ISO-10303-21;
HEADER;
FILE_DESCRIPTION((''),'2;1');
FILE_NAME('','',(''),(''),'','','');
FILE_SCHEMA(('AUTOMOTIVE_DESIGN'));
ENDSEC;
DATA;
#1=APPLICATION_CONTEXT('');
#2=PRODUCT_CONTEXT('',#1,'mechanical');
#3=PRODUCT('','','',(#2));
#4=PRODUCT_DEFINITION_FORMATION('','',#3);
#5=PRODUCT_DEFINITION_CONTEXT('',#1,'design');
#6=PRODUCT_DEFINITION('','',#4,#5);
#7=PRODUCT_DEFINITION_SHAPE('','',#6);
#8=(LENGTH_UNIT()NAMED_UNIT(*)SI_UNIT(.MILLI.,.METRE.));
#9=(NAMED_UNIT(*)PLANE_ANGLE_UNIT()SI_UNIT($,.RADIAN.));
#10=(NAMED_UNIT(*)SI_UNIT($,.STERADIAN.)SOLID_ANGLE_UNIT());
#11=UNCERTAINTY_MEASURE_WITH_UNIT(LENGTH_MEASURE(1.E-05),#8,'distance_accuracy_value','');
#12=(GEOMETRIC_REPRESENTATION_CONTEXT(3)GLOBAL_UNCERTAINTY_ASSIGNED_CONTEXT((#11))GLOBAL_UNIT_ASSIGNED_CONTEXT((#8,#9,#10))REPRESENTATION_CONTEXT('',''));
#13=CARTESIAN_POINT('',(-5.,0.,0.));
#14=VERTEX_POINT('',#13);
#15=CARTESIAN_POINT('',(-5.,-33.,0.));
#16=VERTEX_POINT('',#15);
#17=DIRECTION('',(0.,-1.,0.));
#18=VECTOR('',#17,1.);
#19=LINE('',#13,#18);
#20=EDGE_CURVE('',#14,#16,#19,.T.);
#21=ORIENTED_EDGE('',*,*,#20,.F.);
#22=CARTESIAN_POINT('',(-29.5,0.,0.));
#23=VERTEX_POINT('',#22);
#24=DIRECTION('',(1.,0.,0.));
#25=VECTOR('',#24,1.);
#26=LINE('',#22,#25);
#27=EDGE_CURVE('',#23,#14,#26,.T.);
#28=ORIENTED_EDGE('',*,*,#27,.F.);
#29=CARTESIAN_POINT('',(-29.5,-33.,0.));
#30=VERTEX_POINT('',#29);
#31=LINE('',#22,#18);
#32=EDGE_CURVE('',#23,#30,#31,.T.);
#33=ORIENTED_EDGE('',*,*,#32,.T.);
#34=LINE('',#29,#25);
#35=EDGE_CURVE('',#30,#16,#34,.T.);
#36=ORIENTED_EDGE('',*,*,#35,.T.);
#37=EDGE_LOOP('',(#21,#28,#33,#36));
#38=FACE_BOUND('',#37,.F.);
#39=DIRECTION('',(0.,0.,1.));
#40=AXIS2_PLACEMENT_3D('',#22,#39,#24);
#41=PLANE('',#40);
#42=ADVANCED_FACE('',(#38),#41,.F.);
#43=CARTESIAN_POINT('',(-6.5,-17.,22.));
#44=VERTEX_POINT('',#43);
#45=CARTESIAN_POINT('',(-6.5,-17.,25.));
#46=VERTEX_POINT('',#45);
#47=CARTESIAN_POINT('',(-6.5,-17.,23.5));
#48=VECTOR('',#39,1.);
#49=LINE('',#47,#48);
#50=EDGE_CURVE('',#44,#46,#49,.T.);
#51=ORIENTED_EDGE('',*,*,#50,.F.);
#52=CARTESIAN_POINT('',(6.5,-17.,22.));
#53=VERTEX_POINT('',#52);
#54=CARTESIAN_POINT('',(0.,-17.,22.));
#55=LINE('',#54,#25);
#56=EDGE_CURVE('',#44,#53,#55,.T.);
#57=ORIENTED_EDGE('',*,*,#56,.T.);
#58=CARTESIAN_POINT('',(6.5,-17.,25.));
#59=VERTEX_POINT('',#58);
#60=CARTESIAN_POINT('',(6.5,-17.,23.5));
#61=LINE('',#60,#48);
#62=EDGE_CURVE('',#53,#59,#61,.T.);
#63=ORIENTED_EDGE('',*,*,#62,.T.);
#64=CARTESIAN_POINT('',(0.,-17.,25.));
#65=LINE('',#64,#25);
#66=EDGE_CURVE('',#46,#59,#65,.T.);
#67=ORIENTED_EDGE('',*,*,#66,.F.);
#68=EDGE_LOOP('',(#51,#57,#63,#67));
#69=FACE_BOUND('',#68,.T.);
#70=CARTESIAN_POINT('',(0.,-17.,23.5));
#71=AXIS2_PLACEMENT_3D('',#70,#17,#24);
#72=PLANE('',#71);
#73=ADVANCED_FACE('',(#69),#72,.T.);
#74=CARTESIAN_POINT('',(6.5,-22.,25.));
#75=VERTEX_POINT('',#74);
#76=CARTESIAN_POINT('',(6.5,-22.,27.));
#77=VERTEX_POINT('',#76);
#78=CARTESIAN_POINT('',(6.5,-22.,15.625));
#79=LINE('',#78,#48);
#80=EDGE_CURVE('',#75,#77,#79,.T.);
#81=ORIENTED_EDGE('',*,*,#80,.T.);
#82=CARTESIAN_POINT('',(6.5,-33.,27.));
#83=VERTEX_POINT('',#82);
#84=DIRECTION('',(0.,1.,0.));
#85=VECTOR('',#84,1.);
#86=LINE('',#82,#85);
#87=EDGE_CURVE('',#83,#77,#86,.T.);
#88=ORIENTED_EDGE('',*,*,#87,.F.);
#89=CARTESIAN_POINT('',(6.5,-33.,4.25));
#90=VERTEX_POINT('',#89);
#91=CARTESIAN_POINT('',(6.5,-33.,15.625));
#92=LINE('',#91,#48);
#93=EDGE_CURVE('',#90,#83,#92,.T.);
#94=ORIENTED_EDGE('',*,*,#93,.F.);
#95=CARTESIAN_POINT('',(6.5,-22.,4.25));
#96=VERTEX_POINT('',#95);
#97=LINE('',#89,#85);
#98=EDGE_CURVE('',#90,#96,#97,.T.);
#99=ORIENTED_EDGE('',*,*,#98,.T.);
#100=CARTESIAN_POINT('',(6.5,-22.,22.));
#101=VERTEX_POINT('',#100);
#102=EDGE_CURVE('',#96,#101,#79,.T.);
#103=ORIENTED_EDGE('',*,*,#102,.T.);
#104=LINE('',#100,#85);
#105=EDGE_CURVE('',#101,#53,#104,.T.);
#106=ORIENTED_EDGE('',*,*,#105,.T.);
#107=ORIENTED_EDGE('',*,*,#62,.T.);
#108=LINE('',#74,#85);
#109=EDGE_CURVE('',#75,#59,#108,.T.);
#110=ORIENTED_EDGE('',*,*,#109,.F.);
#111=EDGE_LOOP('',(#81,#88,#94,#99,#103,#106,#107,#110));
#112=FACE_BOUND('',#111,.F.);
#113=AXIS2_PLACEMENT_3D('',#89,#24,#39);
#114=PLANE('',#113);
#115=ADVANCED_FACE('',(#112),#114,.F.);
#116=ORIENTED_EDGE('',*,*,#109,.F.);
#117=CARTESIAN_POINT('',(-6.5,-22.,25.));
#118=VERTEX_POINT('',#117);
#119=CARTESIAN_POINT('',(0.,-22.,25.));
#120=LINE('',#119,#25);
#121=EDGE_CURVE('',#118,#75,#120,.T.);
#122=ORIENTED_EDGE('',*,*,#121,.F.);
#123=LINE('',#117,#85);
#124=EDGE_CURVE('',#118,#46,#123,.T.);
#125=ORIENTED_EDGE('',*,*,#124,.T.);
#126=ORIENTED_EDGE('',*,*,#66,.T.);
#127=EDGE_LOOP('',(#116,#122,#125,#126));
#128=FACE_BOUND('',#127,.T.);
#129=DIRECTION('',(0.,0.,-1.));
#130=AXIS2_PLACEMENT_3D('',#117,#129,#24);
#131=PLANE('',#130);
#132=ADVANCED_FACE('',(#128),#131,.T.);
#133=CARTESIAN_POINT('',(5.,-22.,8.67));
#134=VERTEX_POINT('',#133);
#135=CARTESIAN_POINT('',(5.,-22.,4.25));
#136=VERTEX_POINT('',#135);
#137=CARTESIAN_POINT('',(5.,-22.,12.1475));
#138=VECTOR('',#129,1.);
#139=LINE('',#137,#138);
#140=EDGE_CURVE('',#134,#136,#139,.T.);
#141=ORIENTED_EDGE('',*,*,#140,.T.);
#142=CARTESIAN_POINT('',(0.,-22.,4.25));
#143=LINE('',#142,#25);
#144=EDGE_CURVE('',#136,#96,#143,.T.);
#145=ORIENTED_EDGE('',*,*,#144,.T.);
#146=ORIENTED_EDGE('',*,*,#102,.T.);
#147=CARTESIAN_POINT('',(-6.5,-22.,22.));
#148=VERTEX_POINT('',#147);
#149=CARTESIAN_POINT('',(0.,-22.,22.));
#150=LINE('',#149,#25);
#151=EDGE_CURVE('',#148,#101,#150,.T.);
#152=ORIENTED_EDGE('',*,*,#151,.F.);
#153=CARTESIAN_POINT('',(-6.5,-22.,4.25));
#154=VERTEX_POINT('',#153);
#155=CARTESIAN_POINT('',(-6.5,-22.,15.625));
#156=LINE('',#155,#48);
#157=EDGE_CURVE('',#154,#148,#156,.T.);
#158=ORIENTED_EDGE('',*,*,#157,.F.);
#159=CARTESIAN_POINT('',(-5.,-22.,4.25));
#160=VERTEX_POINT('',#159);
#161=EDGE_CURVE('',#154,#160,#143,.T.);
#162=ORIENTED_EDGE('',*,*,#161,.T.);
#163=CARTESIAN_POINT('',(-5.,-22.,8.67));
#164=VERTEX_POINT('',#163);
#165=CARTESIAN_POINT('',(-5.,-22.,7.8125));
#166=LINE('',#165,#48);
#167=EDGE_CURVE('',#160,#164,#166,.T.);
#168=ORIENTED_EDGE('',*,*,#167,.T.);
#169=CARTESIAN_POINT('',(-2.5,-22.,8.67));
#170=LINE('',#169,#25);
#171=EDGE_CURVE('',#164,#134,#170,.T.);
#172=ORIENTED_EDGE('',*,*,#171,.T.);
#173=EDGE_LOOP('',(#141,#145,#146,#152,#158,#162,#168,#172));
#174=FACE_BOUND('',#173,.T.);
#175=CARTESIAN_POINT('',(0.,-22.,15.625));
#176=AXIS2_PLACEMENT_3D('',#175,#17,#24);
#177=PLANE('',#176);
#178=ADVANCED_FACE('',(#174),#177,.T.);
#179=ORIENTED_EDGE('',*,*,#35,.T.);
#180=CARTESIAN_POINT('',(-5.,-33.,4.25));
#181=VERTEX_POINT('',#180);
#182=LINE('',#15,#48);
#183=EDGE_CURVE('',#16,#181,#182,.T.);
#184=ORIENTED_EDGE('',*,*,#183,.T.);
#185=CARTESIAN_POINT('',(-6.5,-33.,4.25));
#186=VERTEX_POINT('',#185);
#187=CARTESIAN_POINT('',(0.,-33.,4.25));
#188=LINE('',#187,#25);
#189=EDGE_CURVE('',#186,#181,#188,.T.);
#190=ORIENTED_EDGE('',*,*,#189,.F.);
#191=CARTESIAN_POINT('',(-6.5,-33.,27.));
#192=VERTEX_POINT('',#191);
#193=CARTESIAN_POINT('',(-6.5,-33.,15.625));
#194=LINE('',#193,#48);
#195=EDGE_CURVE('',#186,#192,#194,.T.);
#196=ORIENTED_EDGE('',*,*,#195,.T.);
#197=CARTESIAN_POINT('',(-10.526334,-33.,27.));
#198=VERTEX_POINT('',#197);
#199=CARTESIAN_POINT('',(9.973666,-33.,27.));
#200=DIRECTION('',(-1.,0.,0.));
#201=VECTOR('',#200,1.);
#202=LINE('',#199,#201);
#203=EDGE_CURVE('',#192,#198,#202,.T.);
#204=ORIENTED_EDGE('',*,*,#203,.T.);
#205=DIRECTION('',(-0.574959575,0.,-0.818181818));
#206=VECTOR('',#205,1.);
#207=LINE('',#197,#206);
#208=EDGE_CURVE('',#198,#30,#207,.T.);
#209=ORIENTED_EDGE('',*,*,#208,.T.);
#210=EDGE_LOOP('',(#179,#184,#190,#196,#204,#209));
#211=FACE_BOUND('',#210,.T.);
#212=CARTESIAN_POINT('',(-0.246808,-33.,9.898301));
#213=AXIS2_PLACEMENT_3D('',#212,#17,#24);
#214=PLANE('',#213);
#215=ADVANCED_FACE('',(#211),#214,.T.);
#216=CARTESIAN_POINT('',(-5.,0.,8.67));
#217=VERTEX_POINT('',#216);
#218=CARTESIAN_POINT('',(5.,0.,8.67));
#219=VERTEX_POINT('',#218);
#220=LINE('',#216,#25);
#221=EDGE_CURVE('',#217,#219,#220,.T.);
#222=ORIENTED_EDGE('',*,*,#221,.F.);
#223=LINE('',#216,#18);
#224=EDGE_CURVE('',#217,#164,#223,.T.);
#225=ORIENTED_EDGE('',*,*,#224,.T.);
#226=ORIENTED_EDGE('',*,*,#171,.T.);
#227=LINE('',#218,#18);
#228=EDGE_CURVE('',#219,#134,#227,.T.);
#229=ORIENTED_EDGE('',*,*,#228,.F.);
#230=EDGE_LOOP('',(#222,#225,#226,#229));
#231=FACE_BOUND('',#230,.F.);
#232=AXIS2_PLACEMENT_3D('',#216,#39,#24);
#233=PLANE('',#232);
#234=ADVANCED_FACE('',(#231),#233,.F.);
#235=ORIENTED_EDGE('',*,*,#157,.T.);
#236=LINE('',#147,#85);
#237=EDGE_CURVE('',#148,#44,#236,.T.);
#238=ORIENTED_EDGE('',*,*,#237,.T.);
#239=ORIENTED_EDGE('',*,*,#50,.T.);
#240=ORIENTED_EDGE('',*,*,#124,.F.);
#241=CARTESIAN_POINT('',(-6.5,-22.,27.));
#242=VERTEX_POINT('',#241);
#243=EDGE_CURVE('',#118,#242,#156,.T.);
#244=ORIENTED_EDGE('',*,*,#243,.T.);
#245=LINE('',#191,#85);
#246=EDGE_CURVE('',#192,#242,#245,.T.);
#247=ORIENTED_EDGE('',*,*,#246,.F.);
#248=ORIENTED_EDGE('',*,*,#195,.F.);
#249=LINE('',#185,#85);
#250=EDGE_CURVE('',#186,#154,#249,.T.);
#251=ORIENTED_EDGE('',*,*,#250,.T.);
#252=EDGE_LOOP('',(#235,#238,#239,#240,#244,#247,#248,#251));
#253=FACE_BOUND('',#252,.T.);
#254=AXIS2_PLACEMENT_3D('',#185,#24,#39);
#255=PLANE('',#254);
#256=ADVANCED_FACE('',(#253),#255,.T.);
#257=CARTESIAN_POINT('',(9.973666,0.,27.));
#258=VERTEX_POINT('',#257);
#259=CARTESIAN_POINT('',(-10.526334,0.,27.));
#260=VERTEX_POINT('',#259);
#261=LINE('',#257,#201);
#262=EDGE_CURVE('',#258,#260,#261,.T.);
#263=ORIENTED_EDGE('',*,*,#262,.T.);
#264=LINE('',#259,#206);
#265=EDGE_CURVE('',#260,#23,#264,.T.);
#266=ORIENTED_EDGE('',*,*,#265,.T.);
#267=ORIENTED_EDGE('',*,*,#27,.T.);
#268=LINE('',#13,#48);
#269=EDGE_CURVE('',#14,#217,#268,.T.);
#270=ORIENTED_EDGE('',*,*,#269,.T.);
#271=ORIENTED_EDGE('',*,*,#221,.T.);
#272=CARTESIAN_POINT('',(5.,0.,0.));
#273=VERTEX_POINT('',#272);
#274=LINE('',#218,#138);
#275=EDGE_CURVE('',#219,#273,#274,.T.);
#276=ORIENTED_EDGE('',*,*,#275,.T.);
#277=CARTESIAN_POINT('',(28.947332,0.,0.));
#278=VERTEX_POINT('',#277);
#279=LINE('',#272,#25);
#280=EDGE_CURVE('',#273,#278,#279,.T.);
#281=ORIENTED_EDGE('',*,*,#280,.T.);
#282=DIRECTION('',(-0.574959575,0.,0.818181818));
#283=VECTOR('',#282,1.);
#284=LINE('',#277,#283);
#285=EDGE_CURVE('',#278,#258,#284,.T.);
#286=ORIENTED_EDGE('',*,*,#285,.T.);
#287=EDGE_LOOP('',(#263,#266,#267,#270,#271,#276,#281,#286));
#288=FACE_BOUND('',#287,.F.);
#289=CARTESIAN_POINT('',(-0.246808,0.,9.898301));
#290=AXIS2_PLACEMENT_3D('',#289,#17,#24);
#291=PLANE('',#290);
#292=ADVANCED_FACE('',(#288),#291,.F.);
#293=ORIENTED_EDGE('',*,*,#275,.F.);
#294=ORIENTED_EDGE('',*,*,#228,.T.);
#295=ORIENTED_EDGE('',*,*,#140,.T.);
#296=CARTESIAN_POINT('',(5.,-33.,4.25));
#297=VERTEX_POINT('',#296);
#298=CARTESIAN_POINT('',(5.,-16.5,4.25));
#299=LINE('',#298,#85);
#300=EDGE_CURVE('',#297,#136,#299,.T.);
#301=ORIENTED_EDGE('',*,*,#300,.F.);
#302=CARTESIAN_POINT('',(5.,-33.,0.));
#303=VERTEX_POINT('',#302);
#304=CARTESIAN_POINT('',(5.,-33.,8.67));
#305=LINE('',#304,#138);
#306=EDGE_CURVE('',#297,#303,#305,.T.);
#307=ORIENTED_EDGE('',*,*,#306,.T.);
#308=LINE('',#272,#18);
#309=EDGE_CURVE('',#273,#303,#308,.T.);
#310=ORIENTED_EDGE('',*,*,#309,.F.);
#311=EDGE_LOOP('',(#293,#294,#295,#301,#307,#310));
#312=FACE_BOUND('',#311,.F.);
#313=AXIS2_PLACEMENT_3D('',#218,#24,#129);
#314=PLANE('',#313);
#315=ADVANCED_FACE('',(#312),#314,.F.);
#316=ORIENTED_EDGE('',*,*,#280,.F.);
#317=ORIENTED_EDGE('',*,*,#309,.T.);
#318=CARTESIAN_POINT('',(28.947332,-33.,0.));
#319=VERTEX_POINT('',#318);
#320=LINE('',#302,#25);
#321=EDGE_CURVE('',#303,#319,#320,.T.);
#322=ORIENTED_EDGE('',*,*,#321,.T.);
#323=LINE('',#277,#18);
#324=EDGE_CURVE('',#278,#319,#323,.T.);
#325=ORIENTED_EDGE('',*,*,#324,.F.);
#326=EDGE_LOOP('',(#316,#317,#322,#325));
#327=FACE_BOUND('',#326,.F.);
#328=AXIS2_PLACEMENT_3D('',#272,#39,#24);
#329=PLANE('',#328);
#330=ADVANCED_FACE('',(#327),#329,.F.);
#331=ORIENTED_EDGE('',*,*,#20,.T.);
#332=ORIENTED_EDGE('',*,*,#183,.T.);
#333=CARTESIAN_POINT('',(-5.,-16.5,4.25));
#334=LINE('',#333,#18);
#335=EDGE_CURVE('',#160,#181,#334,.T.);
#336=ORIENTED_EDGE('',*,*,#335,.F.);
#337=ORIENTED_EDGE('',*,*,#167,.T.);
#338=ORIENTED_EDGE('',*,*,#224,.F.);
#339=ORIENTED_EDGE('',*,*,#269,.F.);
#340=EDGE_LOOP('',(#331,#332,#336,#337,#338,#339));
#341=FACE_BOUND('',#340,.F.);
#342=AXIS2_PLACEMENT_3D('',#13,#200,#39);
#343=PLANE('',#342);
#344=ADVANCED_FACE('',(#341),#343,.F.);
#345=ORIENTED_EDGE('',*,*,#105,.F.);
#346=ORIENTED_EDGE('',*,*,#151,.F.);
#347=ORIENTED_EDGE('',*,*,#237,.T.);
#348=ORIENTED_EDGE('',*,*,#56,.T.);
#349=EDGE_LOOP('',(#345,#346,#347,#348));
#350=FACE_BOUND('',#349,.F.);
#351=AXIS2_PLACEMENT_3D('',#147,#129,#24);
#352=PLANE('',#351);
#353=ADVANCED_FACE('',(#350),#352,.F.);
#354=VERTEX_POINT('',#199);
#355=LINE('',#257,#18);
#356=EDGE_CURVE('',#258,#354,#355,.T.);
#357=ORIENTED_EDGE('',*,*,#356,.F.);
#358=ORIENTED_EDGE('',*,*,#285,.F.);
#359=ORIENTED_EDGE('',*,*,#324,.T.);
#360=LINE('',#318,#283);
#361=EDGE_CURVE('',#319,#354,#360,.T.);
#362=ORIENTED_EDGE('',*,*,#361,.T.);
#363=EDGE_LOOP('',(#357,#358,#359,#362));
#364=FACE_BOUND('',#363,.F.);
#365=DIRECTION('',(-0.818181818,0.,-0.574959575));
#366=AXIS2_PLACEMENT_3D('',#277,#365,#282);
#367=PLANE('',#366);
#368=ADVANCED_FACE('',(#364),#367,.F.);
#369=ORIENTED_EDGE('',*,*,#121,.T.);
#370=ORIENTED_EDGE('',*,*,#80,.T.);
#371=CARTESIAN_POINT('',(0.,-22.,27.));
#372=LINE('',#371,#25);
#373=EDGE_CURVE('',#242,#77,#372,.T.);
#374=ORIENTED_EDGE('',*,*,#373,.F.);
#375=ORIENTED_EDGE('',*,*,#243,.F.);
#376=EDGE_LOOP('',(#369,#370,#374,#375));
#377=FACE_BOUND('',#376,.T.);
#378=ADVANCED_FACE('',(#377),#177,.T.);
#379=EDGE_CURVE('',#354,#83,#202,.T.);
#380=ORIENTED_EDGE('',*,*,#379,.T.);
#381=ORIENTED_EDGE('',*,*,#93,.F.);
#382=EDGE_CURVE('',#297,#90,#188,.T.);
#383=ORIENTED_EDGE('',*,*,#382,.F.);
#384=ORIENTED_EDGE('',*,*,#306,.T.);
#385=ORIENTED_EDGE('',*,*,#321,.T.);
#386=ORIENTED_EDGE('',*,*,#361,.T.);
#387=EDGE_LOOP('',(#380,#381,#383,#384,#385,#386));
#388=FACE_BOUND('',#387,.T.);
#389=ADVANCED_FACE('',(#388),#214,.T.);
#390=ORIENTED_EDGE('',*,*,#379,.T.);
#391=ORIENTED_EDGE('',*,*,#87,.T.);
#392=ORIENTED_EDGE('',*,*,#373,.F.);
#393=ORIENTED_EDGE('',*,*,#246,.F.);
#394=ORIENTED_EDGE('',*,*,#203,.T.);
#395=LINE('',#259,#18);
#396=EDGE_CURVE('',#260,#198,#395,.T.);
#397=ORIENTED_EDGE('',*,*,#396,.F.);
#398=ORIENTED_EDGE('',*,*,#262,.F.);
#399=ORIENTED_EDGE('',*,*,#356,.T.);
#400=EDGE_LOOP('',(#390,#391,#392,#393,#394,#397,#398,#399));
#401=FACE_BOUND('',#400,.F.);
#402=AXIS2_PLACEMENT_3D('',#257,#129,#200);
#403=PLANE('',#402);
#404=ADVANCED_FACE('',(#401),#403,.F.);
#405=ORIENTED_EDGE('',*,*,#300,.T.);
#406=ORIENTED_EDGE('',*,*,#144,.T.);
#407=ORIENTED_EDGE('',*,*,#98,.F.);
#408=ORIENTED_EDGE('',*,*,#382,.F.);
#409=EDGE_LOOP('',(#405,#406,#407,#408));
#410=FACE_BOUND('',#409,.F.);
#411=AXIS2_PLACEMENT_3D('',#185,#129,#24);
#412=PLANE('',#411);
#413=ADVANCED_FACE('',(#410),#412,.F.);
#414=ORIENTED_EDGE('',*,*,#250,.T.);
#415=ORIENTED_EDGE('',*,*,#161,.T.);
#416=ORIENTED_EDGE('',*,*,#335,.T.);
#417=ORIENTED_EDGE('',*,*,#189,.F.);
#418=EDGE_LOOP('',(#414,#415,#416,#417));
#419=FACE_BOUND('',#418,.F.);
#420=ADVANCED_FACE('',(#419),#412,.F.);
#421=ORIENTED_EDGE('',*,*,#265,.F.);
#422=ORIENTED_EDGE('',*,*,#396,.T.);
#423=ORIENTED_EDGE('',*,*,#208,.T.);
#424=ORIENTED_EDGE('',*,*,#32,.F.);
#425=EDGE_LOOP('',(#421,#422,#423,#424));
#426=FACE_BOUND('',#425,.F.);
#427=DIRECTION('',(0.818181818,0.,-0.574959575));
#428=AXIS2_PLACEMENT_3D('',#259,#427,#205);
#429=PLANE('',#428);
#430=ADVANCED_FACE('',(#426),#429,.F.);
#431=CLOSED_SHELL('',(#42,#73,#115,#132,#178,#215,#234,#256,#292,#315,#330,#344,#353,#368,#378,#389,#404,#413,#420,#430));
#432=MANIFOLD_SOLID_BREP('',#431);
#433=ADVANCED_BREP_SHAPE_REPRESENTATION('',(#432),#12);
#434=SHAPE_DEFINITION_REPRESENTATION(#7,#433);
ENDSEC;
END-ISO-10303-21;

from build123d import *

# Parameters (mm, degrees)
F1_DEPTH = 33
F2_W     = 13
F2_H     = 22.75
F3_DEPTH = 11
F4_W     = 13
F4_H     = 3
F5_DEPTH = 5


# Not quite as in the source:
# - a feature of the source that left no trace in its solid (it failed there, or was rolled back) is left out


with BuildPart() as f1:
    # F0 (on Front) → F1 (new body)
    with BuildSketch(Plane.XZ):
        Polygon((-10.526334039, 27), (-29.5, 0), (-5, 0), (-5, 8.67), (5, 8.67), (5, 0), (28.947331922, 0), (9.973665961, 27), align=None)
    extrude(amount=F1_DEPTH)

    # F2 (on face) → F3 (cut)
    with BuildSketch(Plane.XZ.offset(33)):
        with Locations((0, 15.625)):
            Rectangle(F2_W, F2_H)
    extrude(amount=-F3_DEPTH, mode=Mode.SUBTRACT)

    # F4 (on face) → F5 (cut)
    with BuildSketch(Plane.XZ.offset(22)):
        with Locations((0, 23.5)):
            Rectangle(F4_W, F4_H)
    extrude(amount=-F5_DEPTH, mode=Mode.SUBTRACT)


solid = f1.part
